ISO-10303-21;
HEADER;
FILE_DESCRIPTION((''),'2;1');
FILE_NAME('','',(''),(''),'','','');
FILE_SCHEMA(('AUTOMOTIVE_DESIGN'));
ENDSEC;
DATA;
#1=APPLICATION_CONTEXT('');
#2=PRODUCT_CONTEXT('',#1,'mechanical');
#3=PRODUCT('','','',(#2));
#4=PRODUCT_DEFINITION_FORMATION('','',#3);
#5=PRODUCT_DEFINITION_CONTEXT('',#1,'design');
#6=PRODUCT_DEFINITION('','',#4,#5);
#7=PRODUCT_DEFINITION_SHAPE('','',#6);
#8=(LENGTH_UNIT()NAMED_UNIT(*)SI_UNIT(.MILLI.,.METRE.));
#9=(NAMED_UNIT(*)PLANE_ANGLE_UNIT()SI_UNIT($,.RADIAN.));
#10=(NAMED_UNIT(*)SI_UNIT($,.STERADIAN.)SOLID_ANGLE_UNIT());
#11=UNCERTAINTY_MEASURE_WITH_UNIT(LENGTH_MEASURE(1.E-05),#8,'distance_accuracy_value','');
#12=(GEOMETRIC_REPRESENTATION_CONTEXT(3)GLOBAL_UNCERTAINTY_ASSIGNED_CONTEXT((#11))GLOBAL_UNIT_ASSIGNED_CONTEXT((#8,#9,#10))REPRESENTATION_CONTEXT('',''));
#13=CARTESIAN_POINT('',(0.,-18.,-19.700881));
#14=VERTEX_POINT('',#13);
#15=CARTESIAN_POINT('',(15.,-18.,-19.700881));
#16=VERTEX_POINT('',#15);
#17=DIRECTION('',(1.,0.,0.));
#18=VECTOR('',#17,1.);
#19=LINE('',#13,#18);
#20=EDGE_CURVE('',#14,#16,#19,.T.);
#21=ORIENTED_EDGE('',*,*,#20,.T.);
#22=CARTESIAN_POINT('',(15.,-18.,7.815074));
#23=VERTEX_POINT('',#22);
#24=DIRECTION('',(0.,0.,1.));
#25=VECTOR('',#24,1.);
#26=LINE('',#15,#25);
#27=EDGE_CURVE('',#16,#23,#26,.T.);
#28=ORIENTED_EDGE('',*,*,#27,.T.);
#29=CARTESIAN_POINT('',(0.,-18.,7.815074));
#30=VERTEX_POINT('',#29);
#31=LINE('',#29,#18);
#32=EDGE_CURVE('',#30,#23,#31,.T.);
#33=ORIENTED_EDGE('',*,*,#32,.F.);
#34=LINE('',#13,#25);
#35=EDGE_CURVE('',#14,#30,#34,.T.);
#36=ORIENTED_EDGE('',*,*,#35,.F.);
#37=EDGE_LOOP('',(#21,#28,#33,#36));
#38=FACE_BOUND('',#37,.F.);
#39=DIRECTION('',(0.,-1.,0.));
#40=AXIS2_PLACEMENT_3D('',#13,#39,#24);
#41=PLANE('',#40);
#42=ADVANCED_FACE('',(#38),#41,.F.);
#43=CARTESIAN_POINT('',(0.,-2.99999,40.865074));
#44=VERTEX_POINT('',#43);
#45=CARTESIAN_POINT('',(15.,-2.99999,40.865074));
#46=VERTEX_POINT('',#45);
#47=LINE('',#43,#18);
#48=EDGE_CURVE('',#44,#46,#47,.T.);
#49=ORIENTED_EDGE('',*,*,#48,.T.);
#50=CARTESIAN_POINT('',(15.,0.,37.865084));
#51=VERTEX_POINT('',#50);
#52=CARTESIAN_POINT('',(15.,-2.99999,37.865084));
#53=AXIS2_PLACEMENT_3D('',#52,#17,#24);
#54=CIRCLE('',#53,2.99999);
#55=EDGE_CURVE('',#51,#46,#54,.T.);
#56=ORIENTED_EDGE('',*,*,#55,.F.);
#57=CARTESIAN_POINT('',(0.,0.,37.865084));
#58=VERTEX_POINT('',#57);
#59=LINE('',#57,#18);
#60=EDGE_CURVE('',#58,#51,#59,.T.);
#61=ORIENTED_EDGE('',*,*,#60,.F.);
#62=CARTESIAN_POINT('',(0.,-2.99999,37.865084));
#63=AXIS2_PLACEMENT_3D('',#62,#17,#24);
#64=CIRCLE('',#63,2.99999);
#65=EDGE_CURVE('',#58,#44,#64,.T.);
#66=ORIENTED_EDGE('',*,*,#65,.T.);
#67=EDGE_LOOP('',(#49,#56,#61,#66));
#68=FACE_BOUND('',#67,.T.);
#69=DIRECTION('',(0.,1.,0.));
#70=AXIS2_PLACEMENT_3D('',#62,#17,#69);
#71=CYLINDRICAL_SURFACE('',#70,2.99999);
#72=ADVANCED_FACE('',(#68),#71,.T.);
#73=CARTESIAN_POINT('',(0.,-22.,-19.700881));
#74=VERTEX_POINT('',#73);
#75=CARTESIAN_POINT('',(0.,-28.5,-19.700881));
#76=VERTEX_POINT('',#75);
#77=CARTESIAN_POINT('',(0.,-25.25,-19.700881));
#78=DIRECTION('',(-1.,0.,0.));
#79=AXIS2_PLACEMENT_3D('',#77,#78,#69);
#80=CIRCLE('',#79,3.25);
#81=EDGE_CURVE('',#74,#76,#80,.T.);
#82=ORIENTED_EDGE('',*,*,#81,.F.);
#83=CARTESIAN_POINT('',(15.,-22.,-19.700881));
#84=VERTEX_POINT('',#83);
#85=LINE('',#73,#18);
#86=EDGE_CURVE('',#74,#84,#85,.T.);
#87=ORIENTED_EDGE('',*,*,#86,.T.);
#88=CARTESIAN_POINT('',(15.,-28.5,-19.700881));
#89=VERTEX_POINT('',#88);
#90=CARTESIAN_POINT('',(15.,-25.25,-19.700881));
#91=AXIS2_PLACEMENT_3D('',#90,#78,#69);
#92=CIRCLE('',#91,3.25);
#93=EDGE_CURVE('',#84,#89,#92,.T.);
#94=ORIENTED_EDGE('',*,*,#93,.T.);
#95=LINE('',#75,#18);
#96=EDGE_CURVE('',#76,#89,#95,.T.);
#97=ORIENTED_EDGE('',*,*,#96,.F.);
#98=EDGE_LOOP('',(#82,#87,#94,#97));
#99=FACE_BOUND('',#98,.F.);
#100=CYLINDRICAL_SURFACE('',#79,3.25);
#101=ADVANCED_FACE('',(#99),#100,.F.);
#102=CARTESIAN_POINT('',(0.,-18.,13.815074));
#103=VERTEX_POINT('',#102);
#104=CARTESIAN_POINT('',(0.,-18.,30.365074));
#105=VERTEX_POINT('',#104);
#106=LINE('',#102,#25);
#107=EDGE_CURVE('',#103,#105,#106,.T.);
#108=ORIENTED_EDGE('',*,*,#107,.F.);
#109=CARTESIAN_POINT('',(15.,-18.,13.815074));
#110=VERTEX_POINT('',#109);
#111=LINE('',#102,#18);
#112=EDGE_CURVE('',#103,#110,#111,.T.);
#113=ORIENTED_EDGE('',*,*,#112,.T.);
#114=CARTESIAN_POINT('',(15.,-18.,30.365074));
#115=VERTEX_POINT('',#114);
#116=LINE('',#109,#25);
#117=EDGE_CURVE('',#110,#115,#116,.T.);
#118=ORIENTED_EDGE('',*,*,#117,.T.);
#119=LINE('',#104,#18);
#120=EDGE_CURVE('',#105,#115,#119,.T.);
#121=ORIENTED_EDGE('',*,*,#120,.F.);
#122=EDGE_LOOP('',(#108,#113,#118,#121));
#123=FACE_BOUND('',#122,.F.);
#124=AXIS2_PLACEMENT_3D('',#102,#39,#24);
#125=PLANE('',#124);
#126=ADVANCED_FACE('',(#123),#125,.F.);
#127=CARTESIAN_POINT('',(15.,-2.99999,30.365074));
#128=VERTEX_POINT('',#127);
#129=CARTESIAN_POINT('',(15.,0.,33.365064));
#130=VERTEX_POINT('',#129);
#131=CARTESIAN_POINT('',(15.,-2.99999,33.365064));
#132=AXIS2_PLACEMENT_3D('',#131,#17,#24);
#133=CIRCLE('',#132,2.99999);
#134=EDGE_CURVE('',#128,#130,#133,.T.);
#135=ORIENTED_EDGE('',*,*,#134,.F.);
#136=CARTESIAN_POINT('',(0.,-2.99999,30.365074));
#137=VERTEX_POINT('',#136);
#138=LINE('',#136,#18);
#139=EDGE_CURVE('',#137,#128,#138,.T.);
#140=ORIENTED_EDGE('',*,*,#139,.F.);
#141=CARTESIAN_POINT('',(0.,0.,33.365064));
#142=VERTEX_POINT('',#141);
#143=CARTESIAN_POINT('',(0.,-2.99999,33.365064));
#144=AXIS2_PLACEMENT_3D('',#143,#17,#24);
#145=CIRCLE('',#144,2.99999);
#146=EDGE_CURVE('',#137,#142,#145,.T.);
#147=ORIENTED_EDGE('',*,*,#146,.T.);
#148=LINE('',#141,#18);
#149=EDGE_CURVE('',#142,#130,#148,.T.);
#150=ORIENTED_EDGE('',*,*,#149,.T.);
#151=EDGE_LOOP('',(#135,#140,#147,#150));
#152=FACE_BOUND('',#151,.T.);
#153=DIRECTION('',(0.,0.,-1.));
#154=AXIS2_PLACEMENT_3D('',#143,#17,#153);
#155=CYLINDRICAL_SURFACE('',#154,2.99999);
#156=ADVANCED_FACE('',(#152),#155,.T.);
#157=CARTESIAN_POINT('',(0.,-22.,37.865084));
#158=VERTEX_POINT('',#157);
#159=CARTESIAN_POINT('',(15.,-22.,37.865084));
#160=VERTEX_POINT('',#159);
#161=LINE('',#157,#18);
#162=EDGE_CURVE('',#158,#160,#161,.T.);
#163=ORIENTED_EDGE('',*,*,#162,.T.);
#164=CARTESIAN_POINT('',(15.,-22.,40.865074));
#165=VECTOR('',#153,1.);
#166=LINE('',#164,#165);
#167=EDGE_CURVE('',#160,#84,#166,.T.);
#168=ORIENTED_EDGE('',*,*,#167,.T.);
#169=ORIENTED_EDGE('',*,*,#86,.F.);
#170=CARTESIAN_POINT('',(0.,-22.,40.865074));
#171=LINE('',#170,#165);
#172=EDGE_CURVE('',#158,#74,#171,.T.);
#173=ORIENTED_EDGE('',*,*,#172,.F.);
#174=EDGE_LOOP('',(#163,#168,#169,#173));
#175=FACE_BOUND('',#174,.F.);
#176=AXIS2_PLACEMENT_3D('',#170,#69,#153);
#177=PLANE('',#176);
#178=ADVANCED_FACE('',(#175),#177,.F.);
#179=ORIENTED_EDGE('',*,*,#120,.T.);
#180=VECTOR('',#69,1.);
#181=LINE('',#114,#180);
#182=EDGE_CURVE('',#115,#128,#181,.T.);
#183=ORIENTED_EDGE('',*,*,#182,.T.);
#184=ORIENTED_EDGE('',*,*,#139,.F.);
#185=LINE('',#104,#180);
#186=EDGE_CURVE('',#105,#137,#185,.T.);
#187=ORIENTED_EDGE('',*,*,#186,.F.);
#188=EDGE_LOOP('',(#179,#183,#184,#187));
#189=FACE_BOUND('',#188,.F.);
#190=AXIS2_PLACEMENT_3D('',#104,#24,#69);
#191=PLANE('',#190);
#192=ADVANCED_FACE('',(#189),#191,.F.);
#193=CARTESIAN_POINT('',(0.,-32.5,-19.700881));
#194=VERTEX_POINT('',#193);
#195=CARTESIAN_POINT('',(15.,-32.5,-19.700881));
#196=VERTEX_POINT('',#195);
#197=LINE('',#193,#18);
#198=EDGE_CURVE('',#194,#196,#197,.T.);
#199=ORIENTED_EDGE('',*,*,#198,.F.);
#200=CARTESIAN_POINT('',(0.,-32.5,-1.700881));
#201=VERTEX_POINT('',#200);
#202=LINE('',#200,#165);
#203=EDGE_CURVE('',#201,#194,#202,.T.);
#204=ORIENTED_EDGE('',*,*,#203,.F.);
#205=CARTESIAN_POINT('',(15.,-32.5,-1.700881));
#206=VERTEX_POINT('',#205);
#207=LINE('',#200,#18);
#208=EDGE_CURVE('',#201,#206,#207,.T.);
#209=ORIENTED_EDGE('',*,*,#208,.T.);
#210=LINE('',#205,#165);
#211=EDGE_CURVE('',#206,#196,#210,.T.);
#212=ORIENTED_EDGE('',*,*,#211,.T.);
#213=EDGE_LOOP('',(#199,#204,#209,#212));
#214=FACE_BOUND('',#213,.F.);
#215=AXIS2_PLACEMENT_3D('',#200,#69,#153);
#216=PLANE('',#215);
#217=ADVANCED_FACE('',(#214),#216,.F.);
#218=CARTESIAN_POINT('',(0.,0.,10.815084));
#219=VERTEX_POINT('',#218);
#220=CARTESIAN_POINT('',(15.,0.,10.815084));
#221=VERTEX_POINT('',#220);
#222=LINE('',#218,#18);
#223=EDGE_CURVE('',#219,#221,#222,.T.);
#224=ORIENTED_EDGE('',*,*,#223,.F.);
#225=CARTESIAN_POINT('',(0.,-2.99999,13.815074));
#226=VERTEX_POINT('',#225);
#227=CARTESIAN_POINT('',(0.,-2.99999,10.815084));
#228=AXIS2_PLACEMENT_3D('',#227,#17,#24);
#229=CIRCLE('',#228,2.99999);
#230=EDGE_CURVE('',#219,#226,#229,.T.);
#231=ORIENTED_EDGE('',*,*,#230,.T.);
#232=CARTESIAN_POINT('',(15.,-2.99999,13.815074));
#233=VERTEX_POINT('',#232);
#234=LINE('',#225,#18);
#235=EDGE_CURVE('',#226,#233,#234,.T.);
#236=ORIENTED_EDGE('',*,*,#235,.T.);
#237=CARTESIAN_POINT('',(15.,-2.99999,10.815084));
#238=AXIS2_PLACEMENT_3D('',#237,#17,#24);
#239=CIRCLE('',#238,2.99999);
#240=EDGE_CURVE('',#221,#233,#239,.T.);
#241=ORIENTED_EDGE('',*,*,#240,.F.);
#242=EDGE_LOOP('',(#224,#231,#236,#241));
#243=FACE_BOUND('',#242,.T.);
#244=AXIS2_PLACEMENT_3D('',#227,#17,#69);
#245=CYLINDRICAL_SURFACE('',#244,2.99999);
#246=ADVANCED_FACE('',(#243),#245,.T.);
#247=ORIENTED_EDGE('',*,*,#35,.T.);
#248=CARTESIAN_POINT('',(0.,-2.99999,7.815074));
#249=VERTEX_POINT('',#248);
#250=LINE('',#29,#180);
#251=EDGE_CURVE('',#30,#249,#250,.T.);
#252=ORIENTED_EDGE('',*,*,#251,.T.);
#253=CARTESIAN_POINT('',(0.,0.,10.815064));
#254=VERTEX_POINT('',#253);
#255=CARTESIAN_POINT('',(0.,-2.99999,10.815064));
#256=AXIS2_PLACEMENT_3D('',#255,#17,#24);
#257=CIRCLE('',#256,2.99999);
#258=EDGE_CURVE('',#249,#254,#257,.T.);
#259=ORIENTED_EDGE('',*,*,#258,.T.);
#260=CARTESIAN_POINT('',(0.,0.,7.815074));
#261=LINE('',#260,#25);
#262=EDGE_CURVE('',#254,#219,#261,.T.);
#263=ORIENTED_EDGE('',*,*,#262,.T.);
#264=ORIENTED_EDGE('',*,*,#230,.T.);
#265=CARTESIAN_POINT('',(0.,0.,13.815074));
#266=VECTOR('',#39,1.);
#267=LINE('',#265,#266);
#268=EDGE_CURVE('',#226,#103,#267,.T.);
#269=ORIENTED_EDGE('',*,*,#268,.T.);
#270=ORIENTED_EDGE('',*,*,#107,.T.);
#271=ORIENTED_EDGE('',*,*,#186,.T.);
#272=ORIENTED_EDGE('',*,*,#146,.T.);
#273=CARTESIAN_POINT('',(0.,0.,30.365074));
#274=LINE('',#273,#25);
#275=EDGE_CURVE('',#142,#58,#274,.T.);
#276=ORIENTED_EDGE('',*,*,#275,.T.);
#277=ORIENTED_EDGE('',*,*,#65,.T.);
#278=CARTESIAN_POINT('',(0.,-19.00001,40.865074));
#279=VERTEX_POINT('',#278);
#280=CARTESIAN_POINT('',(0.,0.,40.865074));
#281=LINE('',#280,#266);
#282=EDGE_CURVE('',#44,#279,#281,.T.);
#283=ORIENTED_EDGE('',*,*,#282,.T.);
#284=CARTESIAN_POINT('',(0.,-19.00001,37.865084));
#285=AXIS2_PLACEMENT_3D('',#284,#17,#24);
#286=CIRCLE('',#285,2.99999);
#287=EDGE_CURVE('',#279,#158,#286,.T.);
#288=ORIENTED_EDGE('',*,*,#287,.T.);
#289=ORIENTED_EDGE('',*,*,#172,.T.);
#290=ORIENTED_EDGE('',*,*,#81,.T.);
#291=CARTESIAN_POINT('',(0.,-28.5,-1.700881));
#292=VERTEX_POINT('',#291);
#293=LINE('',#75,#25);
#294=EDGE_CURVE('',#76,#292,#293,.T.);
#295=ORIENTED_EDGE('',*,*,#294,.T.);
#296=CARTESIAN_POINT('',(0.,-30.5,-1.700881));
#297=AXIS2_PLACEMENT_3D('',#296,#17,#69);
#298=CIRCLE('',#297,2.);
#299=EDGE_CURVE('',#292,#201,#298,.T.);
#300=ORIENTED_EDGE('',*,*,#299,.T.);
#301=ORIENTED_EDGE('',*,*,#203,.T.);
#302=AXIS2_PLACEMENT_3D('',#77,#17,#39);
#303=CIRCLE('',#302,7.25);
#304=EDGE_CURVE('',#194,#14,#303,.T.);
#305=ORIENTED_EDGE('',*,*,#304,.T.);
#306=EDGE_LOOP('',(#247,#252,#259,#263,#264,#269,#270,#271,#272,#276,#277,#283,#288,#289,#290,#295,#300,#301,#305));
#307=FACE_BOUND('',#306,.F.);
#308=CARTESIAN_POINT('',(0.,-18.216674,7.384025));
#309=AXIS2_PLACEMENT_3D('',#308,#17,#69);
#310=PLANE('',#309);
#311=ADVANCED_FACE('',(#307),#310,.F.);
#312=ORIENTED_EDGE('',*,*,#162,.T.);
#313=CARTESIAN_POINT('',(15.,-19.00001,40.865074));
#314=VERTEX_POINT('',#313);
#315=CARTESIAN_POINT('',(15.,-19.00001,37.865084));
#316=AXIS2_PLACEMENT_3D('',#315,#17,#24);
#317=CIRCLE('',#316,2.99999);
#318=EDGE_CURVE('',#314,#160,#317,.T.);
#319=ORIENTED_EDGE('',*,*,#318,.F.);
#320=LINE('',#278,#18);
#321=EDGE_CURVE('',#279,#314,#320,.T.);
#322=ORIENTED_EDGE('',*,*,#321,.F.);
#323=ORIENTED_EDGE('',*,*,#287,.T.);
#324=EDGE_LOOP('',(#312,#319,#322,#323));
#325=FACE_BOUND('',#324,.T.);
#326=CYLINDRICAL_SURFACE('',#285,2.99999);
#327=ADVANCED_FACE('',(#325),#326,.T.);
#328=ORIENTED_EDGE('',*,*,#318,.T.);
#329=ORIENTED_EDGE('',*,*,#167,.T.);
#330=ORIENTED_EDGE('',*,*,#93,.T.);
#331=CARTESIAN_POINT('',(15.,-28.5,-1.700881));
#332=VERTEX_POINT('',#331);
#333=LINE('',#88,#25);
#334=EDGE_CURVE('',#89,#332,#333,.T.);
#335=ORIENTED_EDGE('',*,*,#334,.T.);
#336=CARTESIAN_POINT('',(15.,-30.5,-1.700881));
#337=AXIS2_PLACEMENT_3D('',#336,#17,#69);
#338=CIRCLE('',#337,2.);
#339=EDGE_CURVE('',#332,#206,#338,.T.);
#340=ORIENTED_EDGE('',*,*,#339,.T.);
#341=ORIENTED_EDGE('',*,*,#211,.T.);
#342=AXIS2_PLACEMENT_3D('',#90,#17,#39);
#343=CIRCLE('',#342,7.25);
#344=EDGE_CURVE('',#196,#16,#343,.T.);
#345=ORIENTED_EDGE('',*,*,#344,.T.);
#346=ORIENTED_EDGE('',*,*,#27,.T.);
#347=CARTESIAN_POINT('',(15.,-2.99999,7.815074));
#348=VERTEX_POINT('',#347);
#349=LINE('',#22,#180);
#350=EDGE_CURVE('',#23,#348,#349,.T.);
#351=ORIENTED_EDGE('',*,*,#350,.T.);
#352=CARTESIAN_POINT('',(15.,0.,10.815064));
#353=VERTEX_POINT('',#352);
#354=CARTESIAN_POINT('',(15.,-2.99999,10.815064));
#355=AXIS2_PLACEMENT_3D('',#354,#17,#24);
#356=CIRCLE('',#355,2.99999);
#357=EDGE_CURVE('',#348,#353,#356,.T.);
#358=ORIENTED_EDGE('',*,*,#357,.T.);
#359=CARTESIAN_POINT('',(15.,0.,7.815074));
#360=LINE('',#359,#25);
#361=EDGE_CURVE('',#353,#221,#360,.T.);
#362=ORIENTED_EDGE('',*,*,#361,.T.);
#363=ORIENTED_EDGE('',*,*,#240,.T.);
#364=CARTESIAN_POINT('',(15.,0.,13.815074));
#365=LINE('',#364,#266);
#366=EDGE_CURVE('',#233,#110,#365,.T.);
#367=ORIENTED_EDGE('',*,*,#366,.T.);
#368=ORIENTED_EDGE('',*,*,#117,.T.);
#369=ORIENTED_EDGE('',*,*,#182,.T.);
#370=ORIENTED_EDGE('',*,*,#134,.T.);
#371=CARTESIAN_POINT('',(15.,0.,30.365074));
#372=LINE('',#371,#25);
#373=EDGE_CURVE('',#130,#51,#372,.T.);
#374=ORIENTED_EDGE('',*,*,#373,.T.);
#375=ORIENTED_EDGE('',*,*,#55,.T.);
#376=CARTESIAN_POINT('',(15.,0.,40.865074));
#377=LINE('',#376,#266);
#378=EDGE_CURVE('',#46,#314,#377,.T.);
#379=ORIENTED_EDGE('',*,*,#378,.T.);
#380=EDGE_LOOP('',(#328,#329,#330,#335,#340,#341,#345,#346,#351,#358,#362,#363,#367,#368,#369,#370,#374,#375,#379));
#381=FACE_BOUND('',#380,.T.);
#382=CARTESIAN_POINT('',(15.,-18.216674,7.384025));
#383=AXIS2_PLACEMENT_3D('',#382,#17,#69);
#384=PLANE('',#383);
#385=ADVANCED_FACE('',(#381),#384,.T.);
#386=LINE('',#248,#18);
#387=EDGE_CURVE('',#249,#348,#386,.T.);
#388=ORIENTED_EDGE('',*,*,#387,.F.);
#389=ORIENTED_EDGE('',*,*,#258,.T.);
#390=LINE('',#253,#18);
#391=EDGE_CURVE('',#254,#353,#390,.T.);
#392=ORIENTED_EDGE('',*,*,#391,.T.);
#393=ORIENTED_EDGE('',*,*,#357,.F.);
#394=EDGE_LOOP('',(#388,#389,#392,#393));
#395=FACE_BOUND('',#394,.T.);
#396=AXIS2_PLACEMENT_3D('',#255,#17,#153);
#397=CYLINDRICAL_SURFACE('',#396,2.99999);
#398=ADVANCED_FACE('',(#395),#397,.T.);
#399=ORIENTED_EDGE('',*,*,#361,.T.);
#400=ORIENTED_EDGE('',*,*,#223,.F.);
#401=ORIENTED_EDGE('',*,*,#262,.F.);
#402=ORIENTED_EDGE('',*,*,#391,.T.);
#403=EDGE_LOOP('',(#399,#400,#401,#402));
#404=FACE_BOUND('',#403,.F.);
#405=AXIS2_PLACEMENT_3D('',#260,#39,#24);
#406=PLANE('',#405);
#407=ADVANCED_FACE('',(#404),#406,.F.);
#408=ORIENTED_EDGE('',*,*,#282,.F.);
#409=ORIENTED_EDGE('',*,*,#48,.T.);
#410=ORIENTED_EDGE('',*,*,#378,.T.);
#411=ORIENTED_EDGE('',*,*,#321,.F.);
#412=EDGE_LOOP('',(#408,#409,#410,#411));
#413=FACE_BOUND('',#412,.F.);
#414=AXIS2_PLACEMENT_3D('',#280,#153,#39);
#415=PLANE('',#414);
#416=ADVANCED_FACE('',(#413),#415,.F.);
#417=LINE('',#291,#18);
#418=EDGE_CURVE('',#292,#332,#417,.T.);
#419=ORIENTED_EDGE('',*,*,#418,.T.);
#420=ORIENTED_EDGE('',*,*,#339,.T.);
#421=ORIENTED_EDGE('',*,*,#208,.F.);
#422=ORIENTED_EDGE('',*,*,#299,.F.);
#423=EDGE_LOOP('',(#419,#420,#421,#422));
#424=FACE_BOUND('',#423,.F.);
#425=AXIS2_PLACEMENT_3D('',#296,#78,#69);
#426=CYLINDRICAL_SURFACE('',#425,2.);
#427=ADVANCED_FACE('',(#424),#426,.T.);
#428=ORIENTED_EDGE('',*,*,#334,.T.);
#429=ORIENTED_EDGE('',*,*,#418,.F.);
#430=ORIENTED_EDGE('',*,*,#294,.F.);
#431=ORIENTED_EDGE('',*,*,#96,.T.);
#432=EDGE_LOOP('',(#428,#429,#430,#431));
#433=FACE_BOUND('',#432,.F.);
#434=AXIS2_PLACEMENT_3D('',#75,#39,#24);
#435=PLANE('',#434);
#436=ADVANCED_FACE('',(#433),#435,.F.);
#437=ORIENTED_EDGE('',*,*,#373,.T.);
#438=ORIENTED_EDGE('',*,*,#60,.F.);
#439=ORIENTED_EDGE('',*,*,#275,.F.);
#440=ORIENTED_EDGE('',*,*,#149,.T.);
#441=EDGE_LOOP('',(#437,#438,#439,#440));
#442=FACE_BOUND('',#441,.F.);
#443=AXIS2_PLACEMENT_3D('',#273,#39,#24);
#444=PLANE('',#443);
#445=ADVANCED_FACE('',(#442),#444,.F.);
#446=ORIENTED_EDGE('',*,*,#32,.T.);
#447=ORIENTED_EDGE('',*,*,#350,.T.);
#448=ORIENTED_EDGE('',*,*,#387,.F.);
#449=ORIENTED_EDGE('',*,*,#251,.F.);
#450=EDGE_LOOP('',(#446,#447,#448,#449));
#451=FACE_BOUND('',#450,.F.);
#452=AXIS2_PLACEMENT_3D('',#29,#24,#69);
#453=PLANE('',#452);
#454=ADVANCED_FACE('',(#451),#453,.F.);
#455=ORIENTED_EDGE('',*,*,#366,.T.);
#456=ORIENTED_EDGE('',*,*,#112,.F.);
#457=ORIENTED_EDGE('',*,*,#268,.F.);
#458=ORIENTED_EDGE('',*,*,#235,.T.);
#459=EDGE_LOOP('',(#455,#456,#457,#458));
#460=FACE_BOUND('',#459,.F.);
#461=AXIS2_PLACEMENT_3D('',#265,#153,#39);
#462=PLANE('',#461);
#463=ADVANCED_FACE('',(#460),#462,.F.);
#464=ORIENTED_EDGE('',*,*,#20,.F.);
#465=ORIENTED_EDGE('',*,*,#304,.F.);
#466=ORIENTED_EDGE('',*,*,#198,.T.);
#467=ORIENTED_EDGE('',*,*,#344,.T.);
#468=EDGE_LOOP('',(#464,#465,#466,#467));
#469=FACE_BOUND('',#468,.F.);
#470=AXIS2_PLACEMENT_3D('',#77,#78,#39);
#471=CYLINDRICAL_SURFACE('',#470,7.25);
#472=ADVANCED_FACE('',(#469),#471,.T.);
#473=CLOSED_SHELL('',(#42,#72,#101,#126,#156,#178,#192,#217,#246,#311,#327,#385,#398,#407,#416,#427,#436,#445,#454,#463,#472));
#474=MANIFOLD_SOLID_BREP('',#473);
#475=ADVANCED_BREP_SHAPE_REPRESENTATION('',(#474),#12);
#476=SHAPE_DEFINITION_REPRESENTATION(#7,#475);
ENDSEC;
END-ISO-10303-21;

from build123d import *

# Parameters (mm, degrees)
F1_DEPTH = 15
F2_R     = 2.99999


# Not quite as in the source:
# - a fillet or chamfer is up to 0.001 mm smaller than in the source, because OpenCascade refuses the exact size


with BuildPart() as f1:
    # F0 (on Right) → F1 (new body)
    with BuildSketch(Plane.YZ):
        with BuildLine():
            Line((-18, 30.3650735612), (0, 30.3650735612))
            Line((0, 30.3650735612), (0, 40.8650735612))
            Line((0, 40.8650735612), (-22, 40.8650735612))
            Line((-22, 40.8650735612), (-22, -19.700880742))
            ThreePointArc((-22, -19.700880742), (-25.25, -22.950880742), (-28.5, -19.700880742))
            Line((-28.5, -19.700880742), (-28.5, -1.700880742))
            ThreePointArc((-28.5, -1.700880742), (-30.5, 0.299119258), (-32.5, -1.700880742))
            Line((-32.5, -1.700880742), (-32.5, -19.700880742))
            ThreePointArc((-32.5, -19.700880742), (-25.25, -26.950880742), (-18, -19.700880742))
            Line((-18, -19.700880742), (-18, 7.8150735612))
            Line((-18, 7.8150735612), (0, 7.8150735612))
            Line((0, 7.8150735612), (0, 13.8150735612))
            Line((0, 13.8150735612), (-18, 13.8150735612))
            Line((-18, 13.8150735612), (-18, 30.3650735612))
        make_face()
    extrude(amount=F1_DEPTH)

    # F2 (radius 3 in the source; OpenCascade refuses exactly that, so slightly less here)
    f2_edges = [f1.edges().sort_by_distance(p)[0] for p in [
        (7.5, 0, 30.365074),
        (7.5, 0, 13.815074),
        (7.5, 0, 40.865074),
        (7.5, 0, 7.815074),
        (7.5, -22, 40.865074),
    ]]
    fillet(f2_edges, radius=F2_R)


solid = f1.part
